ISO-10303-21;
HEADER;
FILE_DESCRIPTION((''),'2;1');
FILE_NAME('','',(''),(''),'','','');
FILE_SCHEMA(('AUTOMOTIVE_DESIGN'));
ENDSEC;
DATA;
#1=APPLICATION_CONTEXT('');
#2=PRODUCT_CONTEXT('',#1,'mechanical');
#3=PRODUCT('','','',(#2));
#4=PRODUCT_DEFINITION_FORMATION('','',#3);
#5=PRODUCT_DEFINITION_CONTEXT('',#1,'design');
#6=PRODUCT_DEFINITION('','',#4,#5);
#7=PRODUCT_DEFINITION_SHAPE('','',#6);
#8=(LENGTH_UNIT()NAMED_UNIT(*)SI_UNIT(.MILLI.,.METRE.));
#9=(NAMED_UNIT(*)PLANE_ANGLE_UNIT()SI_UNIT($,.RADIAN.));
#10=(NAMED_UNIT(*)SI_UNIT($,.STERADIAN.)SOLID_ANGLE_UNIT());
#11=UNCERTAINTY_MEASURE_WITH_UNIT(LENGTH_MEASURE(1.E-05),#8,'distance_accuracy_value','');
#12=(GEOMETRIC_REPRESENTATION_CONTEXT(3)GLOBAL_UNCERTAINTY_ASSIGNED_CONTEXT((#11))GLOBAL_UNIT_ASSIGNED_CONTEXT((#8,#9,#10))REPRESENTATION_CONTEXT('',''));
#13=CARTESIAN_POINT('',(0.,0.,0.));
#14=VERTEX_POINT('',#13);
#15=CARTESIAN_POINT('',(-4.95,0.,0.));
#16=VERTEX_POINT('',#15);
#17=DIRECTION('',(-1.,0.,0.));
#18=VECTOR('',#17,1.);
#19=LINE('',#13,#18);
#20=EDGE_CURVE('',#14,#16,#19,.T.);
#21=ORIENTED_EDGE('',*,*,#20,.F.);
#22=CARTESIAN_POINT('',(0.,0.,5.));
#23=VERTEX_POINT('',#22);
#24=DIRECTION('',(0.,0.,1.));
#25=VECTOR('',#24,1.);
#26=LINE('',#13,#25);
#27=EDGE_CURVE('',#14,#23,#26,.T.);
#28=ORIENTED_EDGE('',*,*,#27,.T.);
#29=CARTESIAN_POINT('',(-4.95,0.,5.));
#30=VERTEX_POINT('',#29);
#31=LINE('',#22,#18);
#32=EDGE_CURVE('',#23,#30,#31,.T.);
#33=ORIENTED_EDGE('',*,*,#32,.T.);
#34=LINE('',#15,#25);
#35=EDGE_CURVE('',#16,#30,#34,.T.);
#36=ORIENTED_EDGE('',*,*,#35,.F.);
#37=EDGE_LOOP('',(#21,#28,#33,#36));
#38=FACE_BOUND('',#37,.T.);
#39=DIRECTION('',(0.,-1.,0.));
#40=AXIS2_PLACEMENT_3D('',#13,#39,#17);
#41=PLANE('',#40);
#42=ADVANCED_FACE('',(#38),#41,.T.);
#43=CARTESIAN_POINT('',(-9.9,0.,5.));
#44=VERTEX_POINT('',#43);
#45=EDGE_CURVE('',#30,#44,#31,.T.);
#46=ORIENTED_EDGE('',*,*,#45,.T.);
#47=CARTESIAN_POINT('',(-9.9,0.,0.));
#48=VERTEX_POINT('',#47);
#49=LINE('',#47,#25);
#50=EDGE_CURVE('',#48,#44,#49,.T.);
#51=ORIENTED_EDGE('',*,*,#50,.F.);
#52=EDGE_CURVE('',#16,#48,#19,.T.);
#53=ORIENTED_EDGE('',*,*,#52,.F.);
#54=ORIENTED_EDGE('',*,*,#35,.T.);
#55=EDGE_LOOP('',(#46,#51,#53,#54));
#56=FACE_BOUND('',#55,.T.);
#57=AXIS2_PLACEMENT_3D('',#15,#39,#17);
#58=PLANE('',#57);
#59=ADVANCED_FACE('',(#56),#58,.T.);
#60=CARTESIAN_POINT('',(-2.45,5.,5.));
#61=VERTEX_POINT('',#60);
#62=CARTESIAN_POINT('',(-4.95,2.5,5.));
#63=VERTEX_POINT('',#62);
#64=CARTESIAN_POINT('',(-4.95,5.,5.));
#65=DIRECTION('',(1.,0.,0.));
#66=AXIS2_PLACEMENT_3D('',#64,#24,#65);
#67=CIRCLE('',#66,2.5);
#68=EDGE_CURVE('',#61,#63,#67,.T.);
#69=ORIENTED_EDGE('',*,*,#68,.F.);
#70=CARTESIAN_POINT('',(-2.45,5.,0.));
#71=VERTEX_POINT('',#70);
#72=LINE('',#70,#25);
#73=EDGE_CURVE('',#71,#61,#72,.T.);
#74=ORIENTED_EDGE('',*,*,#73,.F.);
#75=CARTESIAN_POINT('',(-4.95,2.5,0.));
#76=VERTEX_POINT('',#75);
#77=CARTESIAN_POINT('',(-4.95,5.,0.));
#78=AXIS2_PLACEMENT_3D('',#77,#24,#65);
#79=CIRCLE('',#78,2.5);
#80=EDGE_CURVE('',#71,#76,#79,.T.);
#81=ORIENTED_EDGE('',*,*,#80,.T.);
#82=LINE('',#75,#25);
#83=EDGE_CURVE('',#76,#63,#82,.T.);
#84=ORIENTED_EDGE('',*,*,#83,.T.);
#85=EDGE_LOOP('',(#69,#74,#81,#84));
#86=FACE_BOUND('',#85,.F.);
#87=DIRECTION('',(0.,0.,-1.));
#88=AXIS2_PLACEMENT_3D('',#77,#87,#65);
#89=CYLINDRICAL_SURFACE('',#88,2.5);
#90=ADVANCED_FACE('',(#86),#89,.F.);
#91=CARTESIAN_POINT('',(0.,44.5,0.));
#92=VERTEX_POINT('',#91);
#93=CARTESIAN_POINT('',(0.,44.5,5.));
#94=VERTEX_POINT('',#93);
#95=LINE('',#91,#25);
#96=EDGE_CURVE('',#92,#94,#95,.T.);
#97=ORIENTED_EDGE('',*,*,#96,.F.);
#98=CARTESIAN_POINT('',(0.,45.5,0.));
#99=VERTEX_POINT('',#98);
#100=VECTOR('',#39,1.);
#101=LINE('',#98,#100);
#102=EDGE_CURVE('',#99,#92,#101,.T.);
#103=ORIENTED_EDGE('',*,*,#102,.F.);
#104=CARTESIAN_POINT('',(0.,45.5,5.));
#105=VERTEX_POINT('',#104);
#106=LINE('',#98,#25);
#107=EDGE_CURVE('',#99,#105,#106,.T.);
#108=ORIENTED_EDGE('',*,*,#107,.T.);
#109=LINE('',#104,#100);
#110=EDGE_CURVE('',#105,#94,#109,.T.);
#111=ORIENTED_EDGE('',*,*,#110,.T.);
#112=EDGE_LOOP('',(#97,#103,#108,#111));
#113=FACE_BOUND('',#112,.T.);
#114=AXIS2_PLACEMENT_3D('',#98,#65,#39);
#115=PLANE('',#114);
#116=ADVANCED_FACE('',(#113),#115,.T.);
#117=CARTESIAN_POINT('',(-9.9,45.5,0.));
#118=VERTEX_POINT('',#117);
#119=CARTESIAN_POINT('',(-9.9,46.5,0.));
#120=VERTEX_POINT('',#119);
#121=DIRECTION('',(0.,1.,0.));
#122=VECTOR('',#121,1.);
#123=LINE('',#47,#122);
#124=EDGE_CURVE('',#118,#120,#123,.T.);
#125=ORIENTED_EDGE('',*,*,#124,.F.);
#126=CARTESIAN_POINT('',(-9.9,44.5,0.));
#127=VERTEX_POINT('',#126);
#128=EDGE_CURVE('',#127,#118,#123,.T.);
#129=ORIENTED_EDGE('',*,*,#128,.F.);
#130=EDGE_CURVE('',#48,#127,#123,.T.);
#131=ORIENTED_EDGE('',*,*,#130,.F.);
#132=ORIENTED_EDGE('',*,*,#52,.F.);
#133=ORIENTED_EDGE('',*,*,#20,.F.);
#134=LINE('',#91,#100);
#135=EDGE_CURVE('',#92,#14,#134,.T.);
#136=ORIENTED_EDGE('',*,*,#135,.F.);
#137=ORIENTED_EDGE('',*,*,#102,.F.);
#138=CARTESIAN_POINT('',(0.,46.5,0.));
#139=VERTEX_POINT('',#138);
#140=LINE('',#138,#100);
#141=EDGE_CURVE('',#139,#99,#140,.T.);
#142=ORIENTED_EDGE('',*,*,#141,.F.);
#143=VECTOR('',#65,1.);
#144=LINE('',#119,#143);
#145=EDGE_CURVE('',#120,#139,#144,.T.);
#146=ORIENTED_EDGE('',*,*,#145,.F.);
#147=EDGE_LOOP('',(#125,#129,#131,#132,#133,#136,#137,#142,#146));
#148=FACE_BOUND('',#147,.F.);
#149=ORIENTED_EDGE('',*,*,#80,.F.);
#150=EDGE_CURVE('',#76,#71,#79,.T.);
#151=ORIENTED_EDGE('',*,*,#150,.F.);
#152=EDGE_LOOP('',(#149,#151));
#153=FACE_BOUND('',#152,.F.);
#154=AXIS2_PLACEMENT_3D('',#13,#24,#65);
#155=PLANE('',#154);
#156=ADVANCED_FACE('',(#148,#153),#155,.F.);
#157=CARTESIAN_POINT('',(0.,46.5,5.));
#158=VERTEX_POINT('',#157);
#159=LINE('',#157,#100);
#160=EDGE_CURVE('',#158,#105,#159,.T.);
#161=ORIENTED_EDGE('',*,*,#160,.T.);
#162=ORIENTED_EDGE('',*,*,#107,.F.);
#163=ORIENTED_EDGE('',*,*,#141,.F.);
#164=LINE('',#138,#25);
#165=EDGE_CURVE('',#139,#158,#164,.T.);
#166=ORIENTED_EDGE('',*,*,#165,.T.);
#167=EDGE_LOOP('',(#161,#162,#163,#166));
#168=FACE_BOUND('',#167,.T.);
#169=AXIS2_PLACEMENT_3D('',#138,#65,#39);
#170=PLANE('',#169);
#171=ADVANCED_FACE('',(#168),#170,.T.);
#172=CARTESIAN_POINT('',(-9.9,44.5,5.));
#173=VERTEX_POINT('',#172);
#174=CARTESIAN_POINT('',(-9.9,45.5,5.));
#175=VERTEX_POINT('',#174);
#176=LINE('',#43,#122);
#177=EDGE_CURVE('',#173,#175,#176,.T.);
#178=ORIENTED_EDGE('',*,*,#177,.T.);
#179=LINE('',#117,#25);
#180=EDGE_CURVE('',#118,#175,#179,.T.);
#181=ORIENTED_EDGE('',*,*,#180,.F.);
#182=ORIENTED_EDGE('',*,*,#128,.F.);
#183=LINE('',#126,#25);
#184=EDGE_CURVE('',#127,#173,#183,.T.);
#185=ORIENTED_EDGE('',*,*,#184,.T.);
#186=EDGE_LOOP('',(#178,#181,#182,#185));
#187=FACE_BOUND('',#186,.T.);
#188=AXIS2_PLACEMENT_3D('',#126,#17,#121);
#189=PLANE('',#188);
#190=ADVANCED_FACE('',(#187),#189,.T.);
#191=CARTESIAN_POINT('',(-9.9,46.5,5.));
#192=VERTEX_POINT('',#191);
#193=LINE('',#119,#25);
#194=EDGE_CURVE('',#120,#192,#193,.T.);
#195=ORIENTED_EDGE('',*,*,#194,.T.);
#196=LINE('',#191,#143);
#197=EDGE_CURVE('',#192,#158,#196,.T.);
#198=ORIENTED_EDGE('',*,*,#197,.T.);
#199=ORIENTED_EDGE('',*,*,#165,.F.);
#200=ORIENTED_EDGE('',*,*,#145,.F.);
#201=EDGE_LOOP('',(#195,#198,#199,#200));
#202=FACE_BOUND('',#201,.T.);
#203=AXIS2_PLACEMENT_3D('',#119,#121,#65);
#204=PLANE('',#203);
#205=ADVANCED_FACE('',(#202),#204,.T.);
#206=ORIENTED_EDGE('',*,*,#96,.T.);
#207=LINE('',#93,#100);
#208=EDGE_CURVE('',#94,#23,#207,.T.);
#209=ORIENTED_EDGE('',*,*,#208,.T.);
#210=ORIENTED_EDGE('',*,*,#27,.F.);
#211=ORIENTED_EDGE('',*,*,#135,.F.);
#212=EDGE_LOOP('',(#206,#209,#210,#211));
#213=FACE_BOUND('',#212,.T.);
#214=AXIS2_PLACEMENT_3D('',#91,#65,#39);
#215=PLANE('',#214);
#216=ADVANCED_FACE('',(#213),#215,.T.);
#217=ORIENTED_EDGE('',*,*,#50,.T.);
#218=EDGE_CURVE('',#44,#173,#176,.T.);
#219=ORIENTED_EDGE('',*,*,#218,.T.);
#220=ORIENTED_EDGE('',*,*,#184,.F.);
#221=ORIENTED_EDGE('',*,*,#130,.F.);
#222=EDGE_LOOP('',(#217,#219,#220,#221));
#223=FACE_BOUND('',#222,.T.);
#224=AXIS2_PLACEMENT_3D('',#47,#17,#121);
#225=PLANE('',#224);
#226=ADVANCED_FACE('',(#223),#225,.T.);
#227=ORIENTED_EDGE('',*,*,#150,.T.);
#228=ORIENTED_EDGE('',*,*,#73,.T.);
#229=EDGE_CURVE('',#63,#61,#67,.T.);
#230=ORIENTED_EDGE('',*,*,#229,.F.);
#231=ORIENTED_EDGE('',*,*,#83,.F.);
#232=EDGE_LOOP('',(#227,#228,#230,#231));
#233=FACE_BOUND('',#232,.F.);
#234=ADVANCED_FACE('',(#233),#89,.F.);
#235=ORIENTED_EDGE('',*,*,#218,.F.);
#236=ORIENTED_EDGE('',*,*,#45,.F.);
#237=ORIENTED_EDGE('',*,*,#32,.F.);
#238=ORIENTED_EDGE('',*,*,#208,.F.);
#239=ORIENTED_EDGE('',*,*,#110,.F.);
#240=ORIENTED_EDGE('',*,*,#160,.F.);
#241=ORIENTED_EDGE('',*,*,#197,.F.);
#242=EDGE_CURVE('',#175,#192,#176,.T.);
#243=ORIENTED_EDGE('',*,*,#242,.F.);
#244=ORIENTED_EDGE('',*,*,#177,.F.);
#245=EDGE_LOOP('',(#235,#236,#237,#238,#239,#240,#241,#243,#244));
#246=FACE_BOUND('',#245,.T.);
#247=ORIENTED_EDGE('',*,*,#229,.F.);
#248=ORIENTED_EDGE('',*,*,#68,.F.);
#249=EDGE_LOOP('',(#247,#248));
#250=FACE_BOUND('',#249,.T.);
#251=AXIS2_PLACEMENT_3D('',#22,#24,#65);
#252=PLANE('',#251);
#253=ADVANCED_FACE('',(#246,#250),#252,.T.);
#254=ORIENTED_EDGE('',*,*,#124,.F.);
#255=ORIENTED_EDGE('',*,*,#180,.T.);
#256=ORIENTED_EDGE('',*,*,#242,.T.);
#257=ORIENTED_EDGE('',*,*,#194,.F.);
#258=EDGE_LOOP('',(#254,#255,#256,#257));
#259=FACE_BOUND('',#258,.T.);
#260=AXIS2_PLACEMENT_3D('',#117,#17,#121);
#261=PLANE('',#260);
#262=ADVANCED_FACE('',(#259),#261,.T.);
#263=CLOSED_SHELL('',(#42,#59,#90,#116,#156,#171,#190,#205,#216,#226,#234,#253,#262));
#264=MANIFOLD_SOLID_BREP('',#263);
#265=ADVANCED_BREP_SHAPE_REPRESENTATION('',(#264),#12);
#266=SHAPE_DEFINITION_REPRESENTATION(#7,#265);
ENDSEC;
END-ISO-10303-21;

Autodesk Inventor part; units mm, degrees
ref_plane "YZ Plane" through (0, 0, 0) normal (1, 0, 0) x (0, 1, 0)
ref_plane "XZ Plane" through (0, 0, 0) normal (0, 1, 0) x (-1, 0, 0)
ref_plane "XY Plane" through (0, 0, 0) normal (0, 0, 1) x (1, 0, 0)
sketch "Sketch2" plane through (0, 0, 0) normal (0, 0, 1) x (1, 0, 0)
  line L0 (0, 0) -> (-9.9, 0)
  line L1 (-4.95, 0) -> (-4.95, 2.5)
  line L2 (-4.95, 0) -> (-2.45, 0) construction
  circle A0 centre (-4.95, 5) radius 2.5
  line L3 (-4.95, 7.5) -> (32.05, 7.5) construction
  line L4 (0, 44.5) -> (0, 0)
  line L5 (0, 0) -> (-9.9, 0)
  line L6 (-9.9, 0) -> (-9.9, 44.5)
  line L7 (0, 45.5) -> (0, 0)
  line L8 (0, 0) -> (-9.9, 0)
  line L9 (-9.9, 0) -> (-9.9, 45.5)
  line L10 (-4.95, 7.5) -> (66.05, 7.5) construction
  line L11 (0, 0) -> (-9.9, 0)
  line L12 (-9.9, 0) -> (-9.9, 46.5)
  line L13 (-9.9, 46.5) -> (0, 46.5)
  line L14 (0, 46.5) -> (0, 0)
  dimension "d35" = 5
  dimension "d33" = 2.5
  dimension "d34" = 90
  dimension "d46" = 46.5
extrude "Extrusion6" add sketch "Sketch2" along normal blind 5
properties part number "Elbow_Cube_Holder_TestFit_V2"
